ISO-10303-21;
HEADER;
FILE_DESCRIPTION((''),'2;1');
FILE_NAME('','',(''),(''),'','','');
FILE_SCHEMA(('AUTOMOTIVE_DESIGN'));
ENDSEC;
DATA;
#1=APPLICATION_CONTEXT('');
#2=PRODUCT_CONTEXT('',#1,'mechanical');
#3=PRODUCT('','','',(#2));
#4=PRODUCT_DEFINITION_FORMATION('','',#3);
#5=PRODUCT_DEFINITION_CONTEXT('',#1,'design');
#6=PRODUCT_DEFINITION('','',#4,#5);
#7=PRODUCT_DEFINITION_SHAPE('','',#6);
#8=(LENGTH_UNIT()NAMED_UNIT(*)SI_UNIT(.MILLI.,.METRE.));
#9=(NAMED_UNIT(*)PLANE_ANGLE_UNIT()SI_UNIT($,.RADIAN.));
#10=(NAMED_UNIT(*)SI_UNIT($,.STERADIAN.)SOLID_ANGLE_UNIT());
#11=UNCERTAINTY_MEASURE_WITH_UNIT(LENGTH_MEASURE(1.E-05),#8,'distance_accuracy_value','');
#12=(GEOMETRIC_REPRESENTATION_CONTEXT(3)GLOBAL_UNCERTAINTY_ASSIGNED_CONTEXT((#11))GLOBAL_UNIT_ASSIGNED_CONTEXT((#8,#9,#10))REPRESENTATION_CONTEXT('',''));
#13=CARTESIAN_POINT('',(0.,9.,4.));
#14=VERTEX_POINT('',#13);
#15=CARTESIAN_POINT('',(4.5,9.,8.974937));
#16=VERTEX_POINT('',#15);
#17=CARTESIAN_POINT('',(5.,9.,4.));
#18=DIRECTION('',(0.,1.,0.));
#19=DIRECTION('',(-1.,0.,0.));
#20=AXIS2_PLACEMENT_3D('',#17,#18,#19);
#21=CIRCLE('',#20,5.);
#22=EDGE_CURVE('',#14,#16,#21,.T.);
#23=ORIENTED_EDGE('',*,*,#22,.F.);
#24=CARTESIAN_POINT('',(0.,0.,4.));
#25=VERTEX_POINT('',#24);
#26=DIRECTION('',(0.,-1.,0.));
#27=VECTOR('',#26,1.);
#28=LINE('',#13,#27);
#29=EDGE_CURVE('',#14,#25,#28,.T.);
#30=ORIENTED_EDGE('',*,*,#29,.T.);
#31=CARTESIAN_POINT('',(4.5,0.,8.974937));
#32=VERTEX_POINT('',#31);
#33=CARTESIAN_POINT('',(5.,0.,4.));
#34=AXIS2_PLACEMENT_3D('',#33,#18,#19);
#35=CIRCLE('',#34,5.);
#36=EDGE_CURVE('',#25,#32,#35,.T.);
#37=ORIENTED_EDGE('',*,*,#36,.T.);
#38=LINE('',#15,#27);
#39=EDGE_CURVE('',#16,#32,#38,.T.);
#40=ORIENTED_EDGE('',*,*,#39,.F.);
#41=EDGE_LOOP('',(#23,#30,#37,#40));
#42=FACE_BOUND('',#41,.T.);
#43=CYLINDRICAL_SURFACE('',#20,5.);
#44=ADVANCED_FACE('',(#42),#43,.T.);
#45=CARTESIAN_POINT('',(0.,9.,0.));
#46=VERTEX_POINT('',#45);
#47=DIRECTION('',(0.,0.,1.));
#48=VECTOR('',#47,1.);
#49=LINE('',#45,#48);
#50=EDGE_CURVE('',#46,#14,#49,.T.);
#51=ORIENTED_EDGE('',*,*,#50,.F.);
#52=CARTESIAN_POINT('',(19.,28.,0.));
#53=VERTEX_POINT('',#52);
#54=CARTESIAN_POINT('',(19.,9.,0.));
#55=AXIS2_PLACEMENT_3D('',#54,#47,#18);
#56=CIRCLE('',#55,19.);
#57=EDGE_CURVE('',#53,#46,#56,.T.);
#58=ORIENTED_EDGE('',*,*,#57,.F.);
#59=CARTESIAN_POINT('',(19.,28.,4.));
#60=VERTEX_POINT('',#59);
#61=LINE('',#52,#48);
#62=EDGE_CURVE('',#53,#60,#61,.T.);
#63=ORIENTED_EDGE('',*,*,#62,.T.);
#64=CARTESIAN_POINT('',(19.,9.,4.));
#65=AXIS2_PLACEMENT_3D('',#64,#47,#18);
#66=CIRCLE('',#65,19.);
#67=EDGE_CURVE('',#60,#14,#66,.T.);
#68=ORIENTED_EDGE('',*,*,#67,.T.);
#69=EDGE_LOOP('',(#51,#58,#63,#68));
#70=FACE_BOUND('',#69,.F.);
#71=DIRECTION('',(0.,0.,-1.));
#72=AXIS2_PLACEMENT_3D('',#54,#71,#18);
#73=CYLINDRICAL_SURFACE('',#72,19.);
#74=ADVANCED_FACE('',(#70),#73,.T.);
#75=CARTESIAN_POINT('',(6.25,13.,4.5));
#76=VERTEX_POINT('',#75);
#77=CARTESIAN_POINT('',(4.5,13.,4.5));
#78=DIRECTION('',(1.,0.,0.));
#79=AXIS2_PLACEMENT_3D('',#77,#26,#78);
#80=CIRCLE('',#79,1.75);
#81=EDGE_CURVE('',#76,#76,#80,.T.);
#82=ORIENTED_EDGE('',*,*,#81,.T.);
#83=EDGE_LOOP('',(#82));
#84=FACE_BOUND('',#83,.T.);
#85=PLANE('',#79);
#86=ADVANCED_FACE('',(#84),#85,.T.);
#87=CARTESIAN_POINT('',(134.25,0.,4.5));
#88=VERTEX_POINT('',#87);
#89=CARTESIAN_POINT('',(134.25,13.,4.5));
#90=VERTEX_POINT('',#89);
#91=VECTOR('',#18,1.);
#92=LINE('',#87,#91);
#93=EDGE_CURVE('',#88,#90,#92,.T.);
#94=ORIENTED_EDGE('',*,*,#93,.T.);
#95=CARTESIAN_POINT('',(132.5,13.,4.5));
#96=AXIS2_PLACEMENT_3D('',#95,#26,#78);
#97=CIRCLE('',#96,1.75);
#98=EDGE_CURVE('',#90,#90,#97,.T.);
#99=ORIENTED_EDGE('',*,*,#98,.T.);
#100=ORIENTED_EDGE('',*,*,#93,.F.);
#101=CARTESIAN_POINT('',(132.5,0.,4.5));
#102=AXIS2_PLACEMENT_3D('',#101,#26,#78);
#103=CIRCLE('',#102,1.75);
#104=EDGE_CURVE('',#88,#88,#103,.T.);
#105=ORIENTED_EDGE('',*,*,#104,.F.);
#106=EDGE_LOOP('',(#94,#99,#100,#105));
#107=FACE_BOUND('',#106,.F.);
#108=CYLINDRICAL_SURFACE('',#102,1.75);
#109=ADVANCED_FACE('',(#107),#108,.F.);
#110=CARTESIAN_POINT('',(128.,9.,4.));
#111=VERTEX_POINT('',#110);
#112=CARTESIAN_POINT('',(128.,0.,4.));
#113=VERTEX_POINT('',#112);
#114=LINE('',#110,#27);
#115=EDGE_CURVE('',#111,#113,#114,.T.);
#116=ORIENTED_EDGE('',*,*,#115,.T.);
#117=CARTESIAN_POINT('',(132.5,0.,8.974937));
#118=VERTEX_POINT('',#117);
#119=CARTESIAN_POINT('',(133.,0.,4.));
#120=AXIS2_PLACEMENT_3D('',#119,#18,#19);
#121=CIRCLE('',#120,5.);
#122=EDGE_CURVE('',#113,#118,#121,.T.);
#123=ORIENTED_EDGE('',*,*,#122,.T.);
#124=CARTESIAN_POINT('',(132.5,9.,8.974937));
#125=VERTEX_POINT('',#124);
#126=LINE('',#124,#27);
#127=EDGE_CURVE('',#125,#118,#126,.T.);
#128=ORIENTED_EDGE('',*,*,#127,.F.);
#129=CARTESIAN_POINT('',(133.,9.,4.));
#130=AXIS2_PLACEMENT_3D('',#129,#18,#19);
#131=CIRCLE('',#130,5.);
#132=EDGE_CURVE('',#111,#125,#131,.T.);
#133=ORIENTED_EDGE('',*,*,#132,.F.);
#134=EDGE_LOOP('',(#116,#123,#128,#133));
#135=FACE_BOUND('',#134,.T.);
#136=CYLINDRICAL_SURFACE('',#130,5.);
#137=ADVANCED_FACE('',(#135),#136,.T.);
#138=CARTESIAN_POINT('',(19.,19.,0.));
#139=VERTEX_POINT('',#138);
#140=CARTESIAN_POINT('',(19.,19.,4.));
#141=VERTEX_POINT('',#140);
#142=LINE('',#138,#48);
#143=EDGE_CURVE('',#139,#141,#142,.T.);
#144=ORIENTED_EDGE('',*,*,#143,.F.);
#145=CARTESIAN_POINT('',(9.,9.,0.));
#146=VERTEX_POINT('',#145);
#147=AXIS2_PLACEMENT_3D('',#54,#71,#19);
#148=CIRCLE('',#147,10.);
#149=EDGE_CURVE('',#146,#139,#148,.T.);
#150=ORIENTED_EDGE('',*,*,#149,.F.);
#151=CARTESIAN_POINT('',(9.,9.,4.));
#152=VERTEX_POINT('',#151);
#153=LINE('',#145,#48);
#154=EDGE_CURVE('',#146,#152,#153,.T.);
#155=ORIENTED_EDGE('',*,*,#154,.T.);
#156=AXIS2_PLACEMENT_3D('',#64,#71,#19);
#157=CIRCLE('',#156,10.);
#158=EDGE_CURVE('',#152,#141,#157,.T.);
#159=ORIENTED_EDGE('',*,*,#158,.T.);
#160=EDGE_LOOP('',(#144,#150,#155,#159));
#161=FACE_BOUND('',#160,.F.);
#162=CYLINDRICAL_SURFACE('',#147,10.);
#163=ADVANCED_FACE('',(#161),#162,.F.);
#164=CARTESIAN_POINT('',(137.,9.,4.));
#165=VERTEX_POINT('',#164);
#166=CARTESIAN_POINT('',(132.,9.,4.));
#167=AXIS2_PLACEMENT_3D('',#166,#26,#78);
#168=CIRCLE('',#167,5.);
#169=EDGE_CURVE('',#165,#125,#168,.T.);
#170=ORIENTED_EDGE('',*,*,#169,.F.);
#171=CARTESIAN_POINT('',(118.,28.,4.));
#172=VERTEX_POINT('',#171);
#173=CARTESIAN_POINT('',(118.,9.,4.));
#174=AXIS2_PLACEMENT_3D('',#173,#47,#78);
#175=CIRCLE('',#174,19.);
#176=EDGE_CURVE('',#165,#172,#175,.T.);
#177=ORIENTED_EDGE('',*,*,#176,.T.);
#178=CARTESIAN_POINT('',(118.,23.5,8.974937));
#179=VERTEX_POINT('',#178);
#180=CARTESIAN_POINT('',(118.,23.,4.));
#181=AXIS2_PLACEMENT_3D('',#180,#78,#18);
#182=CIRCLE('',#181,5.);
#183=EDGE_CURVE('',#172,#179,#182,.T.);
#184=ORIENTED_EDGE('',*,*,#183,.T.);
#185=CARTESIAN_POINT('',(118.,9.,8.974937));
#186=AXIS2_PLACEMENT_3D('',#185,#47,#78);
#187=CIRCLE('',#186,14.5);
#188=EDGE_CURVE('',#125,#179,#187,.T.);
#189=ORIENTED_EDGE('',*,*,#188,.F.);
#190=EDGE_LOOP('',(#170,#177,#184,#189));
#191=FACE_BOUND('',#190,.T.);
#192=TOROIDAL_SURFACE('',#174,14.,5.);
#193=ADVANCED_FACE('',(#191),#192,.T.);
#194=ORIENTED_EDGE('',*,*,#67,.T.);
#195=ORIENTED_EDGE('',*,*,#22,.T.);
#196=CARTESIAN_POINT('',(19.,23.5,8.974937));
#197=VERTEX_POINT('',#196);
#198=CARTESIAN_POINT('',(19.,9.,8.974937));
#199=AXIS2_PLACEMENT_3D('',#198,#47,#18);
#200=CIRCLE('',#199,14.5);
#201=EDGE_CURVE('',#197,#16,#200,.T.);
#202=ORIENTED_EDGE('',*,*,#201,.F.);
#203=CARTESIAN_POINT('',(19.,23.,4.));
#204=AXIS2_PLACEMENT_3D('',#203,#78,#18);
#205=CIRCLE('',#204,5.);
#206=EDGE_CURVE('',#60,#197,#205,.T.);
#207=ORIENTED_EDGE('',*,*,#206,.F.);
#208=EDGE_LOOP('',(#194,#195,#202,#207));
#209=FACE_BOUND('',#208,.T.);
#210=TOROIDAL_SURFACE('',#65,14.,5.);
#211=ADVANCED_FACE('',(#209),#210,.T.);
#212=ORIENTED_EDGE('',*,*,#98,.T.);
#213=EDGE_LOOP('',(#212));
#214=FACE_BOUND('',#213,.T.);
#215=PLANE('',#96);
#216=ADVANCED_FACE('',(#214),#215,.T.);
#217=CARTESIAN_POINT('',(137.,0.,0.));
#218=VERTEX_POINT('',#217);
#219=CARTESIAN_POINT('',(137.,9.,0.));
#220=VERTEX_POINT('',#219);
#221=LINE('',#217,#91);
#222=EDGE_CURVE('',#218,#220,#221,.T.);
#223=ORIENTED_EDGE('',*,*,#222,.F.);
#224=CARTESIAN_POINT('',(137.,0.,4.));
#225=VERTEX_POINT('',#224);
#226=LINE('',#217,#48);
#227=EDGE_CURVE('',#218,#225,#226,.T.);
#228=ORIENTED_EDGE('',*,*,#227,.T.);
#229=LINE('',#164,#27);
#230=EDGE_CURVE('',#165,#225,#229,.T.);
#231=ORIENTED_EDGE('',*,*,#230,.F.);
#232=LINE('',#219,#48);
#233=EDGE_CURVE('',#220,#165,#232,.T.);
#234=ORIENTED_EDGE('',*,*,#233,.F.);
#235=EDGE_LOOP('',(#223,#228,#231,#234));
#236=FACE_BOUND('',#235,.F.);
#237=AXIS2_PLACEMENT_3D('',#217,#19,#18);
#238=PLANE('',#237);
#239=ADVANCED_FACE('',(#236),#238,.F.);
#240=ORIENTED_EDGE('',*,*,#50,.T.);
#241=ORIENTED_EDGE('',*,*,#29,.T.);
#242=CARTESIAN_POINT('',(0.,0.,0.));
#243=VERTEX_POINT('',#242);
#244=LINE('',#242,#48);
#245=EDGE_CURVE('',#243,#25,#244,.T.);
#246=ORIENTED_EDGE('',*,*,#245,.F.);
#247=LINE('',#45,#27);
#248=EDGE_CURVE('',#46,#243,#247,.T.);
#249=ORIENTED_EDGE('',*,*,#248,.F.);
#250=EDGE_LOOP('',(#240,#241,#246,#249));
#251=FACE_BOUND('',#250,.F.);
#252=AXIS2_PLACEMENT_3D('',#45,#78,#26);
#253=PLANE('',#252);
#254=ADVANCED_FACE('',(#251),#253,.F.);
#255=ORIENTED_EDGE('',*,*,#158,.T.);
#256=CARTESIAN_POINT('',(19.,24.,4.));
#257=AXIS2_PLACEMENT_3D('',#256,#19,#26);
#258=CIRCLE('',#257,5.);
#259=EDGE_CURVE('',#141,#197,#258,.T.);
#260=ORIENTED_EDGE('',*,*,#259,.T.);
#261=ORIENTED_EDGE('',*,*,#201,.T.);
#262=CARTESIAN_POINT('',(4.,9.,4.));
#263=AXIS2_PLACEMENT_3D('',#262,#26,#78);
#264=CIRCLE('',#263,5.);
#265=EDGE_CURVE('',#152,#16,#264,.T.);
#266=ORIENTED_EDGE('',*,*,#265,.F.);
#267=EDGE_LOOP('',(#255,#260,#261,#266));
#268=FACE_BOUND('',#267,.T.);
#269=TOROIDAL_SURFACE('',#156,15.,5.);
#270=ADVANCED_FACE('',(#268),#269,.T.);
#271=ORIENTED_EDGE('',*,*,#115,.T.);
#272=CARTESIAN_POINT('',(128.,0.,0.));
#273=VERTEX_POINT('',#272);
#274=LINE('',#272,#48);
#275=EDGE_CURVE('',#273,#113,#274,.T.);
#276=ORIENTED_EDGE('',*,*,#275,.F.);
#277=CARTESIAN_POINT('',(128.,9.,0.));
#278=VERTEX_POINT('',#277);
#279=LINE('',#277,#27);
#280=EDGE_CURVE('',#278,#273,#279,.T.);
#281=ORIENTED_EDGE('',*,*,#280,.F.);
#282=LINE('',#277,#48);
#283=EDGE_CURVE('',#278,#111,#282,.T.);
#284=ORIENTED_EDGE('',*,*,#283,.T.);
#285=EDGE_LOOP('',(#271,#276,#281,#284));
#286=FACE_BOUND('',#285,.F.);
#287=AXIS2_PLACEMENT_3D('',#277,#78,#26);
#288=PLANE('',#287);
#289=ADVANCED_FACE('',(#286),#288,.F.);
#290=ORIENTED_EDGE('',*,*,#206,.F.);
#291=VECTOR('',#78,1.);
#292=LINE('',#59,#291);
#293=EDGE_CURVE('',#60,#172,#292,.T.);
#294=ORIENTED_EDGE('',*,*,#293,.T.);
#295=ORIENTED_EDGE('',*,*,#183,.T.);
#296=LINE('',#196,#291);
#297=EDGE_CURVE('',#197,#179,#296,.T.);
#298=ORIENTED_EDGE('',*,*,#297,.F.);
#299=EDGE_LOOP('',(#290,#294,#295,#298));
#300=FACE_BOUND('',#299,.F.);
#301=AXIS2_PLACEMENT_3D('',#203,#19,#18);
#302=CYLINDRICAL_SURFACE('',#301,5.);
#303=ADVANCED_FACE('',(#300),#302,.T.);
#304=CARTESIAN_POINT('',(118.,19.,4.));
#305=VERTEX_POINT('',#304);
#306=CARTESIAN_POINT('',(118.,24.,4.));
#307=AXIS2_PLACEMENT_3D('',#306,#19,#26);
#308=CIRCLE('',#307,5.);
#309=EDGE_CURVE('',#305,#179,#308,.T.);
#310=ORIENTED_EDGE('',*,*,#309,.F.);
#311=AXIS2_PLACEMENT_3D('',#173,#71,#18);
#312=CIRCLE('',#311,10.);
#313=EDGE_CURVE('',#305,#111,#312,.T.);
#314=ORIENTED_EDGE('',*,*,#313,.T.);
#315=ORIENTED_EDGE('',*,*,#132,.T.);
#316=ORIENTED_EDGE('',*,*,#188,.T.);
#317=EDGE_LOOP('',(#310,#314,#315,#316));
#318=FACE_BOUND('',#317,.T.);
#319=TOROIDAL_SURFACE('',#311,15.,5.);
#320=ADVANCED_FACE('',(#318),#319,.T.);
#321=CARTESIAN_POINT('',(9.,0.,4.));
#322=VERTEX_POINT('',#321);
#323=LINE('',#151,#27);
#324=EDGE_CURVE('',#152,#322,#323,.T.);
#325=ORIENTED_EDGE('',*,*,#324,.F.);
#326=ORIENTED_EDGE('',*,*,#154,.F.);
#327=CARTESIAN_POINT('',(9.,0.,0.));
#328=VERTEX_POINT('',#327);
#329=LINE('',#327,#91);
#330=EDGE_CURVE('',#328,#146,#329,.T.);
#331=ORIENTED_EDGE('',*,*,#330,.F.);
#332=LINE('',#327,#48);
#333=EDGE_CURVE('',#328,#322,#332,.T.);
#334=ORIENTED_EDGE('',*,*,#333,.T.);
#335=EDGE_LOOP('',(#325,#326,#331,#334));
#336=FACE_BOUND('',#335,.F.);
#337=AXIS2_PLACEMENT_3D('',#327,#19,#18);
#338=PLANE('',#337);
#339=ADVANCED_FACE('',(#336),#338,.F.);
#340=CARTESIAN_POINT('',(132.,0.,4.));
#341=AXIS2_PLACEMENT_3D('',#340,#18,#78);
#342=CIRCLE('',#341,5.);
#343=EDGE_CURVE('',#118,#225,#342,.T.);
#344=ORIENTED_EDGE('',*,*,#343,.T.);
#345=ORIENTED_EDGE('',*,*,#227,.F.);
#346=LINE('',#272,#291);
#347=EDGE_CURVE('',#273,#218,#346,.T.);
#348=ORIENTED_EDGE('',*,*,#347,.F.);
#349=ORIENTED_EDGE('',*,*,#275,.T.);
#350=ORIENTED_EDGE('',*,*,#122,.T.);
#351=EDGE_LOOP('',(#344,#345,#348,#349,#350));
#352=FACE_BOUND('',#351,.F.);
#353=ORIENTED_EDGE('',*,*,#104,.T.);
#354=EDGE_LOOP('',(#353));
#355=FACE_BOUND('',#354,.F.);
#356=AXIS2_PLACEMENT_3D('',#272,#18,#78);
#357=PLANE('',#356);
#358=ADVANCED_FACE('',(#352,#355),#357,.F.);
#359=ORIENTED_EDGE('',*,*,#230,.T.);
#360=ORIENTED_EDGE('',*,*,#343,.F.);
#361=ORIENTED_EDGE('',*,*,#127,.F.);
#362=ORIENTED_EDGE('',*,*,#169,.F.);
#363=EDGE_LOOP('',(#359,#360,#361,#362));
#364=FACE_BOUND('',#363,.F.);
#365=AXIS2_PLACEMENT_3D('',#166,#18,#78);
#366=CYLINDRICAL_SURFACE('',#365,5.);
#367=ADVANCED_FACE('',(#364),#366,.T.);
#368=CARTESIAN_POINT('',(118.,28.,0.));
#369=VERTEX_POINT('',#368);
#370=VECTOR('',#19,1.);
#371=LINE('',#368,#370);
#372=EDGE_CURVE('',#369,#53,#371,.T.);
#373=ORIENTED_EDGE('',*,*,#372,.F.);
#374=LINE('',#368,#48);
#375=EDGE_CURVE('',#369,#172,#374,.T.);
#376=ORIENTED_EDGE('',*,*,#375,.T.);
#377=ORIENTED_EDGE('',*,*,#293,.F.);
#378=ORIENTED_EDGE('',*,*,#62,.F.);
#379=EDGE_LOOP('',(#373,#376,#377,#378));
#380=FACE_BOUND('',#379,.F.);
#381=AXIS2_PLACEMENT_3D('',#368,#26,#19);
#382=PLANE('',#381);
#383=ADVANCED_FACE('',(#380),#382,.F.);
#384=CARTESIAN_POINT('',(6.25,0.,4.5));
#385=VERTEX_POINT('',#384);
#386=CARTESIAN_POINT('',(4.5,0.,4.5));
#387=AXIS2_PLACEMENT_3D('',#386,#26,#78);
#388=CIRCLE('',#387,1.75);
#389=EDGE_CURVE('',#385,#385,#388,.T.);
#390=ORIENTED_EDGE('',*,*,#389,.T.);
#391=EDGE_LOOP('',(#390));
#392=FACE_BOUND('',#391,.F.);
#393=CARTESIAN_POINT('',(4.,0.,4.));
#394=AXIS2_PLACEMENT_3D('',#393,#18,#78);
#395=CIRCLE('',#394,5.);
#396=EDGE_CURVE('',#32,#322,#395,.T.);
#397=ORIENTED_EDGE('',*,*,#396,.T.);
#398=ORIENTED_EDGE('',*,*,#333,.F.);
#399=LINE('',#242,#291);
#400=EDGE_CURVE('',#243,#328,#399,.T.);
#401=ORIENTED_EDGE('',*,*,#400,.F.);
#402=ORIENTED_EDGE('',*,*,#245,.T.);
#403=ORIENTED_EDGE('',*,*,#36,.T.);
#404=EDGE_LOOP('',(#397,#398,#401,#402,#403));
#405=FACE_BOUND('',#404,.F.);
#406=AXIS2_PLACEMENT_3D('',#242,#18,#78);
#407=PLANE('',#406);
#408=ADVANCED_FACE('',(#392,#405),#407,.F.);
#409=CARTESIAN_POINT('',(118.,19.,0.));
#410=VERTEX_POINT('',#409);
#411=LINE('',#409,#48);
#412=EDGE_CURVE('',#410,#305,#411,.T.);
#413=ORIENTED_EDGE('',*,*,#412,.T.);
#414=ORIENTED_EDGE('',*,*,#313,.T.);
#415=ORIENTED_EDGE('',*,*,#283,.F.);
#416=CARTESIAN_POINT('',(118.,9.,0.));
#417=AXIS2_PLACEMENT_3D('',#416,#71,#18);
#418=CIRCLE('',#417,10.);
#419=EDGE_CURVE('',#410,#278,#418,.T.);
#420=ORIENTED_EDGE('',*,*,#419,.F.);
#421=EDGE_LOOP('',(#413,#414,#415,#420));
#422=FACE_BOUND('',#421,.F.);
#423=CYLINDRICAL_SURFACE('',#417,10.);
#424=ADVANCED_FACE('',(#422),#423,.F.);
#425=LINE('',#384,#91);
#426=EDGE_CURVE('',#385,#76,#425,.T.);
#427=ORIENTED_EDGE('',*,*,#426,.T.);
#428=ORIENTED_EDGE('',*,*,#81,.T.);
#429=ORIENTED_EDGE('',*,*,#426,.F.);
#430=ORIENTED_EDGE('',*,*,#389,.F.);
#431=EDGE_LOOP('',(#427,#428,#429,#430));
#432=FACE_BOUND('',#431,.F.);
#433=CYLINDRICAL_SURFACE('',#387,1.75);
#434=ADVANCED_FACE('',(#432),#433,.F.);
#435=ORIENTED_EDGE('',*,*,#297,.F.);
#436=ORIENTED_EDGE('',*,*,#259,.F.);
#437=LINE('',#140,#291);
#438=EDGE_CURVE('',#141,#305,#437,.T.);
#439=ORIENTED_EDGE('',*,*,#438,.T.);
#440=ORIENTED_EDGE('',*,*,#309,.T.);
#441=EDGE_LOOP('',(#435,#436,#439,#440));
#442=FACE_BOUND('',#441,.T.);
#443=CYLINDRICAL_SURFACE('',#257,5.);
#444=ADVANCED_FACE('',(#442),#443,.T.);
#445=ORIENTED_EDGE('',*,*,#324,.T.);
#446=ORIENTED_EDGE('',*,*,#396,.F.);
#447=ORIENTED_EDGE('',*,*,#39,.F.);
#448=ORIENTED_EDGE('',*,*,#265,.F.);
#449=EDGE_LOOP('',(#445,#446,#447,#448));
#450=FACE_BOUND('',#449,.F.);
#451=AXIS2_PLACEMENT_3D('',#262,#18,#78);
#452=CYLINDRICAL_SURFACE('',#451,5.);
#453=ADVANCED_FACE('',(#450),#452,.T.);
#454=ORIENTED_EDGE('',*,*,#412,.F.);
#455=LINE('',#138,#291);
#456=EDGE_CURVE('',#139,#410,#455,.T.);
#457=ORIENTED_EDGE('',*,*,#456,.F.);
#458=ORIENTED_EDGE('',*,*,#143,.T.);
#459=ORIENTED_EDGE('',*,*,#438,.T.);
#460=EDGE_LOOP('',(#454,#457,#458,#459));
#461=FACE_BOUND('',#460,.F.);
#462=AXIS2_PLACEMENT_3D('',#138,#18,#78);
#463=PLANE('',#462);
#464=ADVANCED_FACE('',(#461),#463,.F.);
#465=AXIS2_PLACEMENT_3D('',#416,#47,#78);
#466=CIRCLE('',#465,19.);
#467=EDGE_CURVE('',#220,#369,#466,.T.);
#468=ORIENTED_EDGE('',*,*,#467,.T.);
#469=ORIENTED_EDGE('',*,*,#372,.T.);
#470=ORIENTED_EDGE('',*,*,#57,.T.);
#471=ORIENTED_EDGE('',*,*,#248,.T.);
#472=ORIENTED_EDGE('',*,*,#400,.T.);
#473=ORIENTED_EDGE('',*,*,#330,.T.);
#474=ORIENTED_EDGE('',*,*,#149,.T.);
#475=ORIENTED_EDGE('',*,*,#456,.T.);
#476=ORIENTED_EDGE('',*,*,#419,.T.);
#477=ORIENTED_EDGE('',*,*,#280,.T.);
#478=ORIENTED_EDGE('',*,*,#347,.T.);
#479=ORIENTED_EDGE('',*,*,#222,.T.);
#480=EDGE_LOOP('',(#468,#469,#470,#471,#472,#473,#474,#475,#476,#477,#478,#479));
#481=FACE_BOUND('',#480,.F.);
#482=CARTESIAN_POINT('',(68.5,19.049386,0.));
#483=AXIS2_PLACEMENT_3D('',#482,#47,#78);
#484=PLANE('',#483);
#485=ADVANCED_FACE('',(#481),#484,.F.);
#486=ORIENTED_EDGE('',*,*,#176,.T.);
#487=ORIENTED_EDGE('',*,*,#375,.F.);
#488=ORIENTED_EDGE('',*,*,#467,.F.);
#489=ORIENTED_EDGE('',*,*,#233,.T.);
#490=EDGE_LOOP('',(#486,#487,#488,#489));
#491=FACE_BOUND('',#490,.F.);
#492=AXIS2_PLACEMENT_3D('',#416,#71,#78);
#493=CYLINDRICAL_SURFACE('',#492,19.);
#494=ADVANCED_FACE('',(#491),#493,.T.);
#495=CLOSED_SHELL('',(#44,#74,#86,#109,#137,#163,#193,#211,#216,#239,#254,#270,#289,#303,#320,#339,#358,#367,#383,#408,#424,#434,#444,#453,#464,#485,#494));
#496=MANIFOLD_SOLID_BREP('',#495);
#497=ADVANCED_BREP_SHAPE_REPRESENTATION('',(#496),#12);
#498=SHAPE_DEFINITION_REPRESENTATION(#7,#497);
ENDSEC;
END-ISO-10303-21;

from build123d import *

# Parameters (mm, degrees)
F1_DEPTH     = 9
F2_T1_DEPTH  = 21.5
F2_T3_DEPTH  = 99
F2_T6_ANGLE  = 90
F2_T8_ANGLE  = 90
F2_T10_ANGLE = 90
F2_T12_ANGLE = 90
F3_R         = 1.75
F4_DEPTH     = 13


# Not quite as in the source:
# - a fillet or chamfer that OpenCascade refuses, or shapes differently, is made with other operations: its cross-section is extruded or revolved along the edge and cut away or added


with BuildPart() as f1:
    # F0 (on Top) → F1 (new body)
    with BuildSketch(Plane.XY):
        with BuildLine():
            Line((0, 9), (0, 0))
            Line((0, 0), (9, 0))
            Line((9, 0), (9, 9))
            ThreePointArc((9, 9), (11.9289321881, 16.0710678119), (19, 19))
            Line((19, 19), (118, 19))
            ThreePointArc((118, 19), (125.0710678119, 16.0710678119), (128, 9))
            Line((128, 9), (128, 0))
            Line((128, 0), (137, 0))
            Line((137, 0), (137, 9))
            ThreePointArc((137, 9), (131.4350288425, 22.4350288425), (118, 28))
            Line((118, 28), (19, 28))
            ThreePointArc((19, 28), (5.5649711575, 22.4350288425), (0, 9))
        make_face()
    extrude(amount=F1_DEPTH)

    # F2: fillet of radius 5 on 7 edges, made by hand

    # F2_s2 → F2_t1 (cut)
    with BuildSketch(Plane.XZ.offset(-9)):
        with BuildLine():
            ThreePointArc((0, 4), (1.4644660941, 7.5355339059), (5, 9))
            Line((5, 9), (0, 9))
            Line((0, 9), (0, 4))
        make_face()
        with BuildLine():
            ThreePointArc((137, 4), (135.5355339059, 7.5355339059), (132, 9))
            Line((132, 9), (137, 9))
            Line((137, 9), (137, 4))
        make_face()
        with BuildLine():
            ThreePointArc((128, 4), (129.4644660941, 7.5355339059), (133, 9))
            Line((133, 9), (128, 9))
            Line((128, 9), (128, 4))
        make_face()
        with BuildLine():
            ThreePointArc((9, 4), (7.5355339059, 7.5355339059), (4, 9))
            Line((4, 9), (9, 9))
            Line((9, 9), (9, 4))
        make_face()
    extrude(amount=F2_T1_DEPTH, mode=Mode.SUBTRACT)

    # F2_s4 → F2_t3 (cut)
    with BuildSketch(Plane.YZ.offset(19)):
        with BuildLine():
            ThreePointArc((28, 4), (26.5355339059, 7.5355339059), (23, 9))
            Line((23, 9), (28, 9))
            Line((28, 9), (28, 4))
        make_face()
        with BuildLine():
            ThreePointArc((19, 4), (20.4644660941, 7.5355339059), (24, 9))
            Line((24, 9), (19, 9))
            Line((19, 9), (19, 4))
        make_face()
    extrude(amount=F2_T3_DEPTH, mode=Mode.SUBTRACT)

    # F2_s5 → F2_t6 (revolve, cut)
    with BuildSketch(Plane.YZ.offset(19)):
        with BuildLine():
            ThreePointArc((28, 4), (26.5355339059, 7.5355339059), (23, 9))
            Line((23, 9), (28, 9))
            Line((28, 9), (28, 4))
        make_face()
    revolve(axis=Axis((19, 9, 9), (0, 0, 1)), revolution_arc=F2_T6_ANGLE, mode=Mode.SUBTRACT)

    # F2_s7 → F2_t8 (revolve, cut)
    with BuildSketch(Plane.XZ.offset(-9)):
        with BuildLine():
            ThreePointArc((137, 4), (135.5355339059, 7.5355339059), (132, 9))
            Line((132, 9), (137, 9))
            Line((137, 9), (137, 4))
        make_face()
    revolve(axis=Axis((118, 9, 9), (0, 0, 1)), revolution_arc=F2_T8_ANGLE, mode=Mode.SUBTRACT)

    # F2_s9 → F2_t10 (revolve, cut)
    with BuildSketch(Plane.YZ.offset(118)):
        with BuildLine():
            ThreePointArc((19, 4), (20.4644660941, 7.5355339059), (24, 9))
            Line((24, 9), (19, 9))
            Line((19, 9), (19, 4))
        make_face()
    revolve(axis=Axis((118, 9, 9), (0, 0, -1)), revolution_arc=F2_T10_ANGLE, mode=Mode.SUBTRACT)

    # F2_s11 → F2_t12 (revolve, cut)
    with BuildSketch(Plane.XZ.offset(-9)):
        with BuildLine():
            ThreePointArc((9, 4), (7.5355339059, 7.5355339059), (4, 9))
            Line((4, 9), (9, 9))
            Line((9, 9), (9, 4))
        make_face()
    revolve(axis=Axis((19, 9, 9), (0, 0, -1)), revolution_arc=F2_T12_ANGLE, mode=Mode.SUBTRACT)

    # F3 (on face) → F4 (cut)
    with BuildSketch(Plane.XZ):
        with Locations((4.5, 4.5)):
            Circle(F3_R)
        with Locations((132.5, 4.5)):
            Circle(F3_R)
    extrude(amount=-F4_DEPTH, mode=Mode.SUBTRACT)


solid = f1.part
